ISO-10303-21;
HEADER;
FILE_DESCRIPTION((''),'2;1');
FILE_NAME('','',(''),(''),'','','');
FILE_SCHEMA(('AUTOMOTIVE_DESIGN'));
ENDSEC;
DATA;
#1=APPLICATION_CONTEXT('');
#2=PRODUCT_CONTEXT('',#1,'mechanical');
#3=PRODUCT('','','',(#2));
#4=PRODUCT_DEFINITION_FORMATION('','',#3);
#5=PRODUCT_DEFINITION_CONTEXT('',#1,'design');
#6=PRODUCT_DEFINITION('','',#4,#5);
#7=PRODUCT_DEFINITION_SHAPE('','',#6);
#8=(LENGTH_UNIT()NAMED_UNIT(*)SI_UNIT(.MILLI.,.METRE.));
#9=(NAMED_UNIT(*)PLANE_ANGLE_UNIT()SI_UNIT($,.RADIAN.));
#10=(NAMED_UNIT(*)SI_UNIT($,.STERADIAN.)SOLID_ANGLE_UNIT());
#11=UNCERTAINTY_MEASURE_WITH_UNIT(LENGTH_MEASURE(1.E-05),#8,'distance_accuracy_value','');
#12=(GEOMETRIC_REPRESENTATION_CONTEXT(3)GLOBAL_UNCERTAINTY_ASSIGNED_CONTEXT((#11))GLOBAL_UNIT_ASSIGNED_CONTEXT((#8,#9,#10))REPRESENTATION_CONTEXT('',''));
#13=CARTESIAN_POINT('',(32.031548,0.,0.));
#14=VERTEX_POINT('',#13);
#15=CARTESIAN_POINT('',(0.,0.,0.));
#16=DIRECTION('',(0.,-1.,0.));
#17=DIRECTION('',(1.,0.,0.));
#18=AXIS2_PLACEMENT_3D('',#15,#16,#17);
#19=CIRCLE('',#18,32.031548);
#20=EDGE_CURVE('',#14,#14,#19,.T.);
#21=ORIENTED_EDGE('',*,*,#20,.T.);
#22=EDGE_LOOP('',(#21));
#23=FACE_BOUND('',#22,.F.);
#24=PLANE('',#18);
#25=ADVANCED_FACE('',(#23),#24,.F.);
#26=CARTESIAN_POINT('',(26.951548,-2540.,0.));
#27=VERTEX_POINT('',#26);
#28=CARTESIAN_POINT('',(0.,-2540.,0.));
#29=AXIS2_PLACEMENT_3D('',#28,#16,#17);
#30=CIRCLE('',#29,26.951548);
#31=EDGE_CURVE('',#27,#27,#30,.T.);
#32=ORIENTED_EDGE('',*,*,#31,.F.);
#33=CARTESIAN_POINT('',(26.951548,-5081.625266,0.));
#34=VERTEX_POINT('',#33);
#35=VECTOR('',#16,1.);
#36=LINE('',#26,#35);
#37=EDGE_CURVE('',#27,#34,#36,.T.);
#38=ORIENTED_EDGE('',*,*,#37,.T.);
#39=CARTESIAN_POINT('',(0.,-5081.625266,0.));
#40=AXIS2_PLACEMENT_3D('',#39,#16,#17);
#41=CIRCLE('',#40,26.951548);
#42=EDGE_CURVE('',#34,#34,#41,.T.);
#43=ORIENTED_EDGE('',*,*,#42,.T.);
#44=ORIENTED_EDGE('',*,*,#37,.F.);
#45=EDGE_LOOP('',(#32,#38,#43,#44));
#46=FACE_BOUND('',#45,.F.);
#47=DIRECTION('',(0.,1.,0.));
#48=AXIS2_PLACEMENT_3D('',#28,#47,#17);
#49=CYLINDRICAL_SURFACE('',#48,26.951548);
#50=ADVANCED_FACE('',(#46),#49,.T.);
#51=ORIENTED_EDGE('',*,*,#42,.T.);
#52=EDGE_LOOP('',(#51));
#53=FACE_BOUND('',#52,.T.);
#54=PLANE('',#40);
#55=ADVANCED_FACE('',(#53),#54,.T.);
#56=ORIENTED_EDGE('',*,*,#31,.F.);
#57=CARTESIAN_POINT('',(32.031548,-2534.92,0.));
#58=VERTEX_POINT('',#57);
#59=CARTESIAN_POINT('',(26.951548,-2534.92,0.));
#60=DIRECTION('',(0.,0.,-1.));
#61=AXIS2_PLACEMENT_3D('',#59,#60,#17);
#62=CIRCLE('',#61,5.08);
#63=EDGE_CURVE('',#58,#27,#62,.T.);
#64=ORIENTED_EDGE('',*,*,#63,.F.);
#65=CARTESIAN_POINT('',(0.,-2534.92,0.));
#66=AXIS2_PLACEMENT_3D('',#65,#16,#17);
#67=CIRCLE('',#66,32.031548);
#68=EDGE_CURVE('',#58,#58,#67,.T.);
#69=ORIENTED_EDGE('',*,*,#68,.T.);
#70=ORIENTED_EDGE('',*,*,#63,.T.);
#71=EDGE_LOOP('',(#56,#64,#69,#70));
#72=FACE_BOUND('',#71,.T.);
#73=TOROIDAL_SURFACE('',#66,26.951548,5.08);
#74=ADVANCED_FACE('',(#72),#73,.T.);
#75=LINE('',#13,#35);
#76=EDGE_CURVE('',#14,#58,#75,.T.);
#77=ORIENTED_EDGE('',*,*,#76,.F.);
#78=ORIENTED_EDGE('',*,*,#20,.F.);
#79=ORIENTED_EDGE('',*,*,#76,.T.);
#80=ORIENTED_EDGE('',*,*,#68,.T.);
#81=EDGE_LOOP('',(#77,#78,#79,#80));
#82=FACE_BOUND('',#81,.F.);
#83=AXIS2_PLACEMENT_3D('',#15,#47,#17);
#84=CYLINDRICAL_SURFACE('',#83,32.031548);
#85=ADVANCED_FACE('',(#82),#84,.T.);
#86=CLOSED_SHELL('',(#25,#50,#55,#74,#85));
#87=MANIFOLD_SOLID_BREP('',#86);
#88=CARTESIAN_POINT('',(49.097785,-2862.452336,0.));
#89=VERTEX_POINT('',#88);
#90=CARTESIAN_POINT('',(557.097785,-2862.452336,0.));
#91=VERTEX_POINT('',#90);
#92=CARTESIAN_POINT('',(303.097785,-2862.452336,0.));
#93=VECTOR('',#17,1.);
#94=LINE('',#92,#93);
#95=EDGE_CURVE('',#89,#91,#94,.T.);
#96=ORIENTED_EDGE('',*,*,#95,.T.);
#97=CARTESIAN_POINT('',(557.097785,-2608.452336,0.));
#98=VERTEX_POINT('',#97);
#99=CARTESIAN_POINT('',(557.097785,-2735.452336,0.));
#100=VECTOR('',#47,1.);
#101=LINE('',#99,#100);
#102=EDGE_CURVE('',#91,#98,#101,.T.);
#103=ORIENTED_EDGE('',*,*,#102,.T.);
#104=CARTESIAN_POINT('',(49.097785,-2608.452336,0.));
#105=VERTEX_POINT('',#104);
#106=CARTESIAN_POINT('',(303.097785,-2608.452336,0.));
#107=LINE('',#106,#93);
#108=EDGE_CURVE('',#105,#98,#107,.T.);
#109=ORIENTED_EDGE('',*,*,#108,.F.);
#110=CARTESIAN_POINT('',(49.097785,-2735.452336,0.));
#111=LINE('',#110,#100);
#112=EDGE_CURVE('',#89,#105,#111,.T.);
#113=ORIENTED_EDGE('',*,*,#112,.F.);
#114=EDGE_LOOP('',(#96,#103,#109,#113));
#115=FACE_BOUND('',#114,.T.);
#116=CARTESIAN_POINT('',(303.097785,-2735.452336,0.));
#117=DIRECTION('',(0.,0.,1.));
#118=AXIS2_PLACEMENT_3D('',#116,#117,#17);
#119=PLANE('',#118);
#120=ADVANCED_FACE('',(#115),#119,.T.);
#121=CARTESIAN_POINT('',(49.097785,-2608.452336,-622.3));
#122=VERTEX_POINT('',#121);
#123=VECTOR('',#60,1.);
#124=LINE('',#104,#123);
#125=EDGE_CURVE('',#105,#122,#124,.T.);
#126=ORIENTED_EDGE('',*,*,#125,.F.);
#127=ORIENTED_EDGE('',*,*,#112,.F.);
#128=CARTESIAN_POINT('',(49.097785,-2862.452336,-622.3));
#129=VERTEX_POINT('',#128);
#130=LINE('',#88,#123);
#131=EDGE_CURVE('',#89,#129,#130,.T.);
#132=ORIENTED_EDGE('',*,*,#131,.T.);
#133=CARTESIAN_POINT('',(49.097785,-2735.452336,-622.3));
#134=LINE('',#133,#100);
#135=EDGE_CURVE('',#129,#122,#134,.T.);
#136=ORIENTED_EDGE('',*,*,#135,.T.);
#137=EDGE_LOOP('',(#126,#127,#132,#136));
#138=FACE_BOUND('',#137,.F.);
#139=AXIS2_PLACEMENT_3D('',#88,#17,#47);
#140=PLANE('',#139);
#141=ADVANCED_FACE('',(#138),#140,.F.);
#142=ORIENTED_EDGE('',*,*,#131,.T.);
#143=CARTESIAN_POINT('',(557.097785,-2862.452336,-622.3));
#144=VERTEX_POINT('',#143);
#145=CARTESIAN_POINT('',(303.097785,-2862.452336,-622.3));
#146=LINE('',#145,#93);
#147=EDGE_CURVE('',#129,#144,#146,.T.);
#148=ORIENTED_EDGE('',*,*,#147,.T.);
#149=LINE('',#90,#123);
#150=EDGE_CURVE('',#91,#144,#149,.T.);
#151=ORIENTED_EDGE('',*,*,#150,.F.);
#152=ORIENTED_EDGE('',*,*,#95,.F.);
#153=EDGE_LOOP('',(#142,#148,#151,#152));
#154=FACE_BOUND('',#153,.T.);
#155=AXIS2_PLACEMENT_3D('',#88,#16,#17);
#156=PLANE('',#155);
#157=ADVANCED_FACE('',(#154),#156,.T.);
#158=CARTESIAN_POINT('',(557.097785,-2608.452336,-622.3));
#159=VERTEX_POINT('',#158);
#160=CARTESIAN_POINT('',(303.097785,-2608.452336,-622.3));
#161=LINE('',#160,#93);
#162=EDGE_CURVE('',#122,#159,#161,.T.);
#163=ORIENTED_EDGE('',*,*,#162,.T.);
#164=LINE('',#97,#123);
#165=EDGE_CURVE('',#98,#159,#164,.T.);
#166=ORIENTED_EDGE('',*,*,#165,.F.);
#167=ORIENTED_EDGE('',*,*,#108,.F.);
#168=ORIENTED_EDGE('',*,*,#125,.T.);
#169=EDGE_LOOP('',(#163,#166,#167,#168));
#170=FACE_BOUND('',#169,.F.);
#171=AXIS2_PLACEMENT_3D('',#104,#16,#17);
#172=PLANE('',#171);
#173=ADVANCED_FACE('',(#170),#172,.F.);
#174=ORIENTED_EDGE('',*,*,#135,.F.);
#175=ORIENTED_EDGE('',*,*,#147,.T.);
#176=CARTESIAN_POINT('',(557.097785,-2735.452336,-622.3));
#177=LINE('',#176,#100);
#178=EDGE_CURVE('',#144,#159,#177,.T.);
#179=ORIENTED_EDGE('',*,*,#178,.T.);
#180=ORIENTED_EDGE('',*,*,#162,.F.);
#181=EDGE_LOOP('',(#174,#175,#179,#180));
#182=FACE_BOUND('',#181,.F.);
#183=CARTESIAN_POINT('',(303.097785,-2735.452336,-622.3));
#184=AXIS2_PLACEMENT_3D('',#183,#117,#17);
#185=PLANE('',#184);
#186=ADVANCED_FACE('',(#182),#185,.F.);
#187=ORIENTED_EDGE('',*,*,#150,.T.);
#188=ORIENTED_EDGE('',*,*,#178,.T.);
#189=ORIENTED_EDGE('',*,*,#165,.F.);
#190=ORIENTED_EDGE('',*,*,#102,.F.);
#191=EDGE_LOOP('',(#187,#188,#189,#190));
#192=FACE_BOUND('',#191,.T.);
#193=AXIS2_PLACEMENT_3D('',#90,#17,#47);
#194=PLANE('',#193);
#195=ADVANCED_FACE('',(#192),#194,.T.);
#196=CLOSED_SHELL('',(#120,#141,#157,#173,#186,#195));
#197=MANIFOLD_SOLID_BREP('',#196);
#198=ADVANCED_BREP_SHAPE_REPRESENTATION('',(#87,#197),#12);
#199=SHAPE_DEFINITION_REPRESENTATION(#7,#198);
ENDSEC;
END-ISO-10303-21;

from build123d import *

# Parameters (mm, degrees)
F0_R     = 32.0315478489
F1_DEPTH = 2540
F2_R     = 5.08
F3_DEPTH = 2541.625266
F4_W     = 508
F4_H     = 254
F5_DEPTH = 622.3


# Not quite as in the source:
# - an extrude ends at something that could not be found from the text; its depth is read off the source's solid


with BuildPart() as f1:
    # F0 (on Front) → F1 (new body)
    with BuildSketch(Plane.XZ):
        Circle(F0_R)
    extrude(amount=F1_DEPTH)

    # F2
    f2_edges = [f1.edges().sort_by_distance(p)[0] for p in [
        (-32.031548, -2540, 0),
    ]]
    fillet(f2_edges, radius=F2_R)

    # F3 (add, through all): a face of the model
    f3_faces = [f1.faces().sort_by_distance(p)[0] for p in [
        (0, -2540, 0),
    ]]
    extrude(f3_faces, amount=F3_DEPTH)


with BuildPart() as f5:
    # F4 (on Top) → F5 (new body)
    with BuildSketch(Plane.XY):
        with Locations((303.0977845192, -2735.4523357783)):
            Rectangle(F4_W, F4_H)
    extrude(amount=-F5_DEPTH)


solid = Compound([f1.part, f5.part])
